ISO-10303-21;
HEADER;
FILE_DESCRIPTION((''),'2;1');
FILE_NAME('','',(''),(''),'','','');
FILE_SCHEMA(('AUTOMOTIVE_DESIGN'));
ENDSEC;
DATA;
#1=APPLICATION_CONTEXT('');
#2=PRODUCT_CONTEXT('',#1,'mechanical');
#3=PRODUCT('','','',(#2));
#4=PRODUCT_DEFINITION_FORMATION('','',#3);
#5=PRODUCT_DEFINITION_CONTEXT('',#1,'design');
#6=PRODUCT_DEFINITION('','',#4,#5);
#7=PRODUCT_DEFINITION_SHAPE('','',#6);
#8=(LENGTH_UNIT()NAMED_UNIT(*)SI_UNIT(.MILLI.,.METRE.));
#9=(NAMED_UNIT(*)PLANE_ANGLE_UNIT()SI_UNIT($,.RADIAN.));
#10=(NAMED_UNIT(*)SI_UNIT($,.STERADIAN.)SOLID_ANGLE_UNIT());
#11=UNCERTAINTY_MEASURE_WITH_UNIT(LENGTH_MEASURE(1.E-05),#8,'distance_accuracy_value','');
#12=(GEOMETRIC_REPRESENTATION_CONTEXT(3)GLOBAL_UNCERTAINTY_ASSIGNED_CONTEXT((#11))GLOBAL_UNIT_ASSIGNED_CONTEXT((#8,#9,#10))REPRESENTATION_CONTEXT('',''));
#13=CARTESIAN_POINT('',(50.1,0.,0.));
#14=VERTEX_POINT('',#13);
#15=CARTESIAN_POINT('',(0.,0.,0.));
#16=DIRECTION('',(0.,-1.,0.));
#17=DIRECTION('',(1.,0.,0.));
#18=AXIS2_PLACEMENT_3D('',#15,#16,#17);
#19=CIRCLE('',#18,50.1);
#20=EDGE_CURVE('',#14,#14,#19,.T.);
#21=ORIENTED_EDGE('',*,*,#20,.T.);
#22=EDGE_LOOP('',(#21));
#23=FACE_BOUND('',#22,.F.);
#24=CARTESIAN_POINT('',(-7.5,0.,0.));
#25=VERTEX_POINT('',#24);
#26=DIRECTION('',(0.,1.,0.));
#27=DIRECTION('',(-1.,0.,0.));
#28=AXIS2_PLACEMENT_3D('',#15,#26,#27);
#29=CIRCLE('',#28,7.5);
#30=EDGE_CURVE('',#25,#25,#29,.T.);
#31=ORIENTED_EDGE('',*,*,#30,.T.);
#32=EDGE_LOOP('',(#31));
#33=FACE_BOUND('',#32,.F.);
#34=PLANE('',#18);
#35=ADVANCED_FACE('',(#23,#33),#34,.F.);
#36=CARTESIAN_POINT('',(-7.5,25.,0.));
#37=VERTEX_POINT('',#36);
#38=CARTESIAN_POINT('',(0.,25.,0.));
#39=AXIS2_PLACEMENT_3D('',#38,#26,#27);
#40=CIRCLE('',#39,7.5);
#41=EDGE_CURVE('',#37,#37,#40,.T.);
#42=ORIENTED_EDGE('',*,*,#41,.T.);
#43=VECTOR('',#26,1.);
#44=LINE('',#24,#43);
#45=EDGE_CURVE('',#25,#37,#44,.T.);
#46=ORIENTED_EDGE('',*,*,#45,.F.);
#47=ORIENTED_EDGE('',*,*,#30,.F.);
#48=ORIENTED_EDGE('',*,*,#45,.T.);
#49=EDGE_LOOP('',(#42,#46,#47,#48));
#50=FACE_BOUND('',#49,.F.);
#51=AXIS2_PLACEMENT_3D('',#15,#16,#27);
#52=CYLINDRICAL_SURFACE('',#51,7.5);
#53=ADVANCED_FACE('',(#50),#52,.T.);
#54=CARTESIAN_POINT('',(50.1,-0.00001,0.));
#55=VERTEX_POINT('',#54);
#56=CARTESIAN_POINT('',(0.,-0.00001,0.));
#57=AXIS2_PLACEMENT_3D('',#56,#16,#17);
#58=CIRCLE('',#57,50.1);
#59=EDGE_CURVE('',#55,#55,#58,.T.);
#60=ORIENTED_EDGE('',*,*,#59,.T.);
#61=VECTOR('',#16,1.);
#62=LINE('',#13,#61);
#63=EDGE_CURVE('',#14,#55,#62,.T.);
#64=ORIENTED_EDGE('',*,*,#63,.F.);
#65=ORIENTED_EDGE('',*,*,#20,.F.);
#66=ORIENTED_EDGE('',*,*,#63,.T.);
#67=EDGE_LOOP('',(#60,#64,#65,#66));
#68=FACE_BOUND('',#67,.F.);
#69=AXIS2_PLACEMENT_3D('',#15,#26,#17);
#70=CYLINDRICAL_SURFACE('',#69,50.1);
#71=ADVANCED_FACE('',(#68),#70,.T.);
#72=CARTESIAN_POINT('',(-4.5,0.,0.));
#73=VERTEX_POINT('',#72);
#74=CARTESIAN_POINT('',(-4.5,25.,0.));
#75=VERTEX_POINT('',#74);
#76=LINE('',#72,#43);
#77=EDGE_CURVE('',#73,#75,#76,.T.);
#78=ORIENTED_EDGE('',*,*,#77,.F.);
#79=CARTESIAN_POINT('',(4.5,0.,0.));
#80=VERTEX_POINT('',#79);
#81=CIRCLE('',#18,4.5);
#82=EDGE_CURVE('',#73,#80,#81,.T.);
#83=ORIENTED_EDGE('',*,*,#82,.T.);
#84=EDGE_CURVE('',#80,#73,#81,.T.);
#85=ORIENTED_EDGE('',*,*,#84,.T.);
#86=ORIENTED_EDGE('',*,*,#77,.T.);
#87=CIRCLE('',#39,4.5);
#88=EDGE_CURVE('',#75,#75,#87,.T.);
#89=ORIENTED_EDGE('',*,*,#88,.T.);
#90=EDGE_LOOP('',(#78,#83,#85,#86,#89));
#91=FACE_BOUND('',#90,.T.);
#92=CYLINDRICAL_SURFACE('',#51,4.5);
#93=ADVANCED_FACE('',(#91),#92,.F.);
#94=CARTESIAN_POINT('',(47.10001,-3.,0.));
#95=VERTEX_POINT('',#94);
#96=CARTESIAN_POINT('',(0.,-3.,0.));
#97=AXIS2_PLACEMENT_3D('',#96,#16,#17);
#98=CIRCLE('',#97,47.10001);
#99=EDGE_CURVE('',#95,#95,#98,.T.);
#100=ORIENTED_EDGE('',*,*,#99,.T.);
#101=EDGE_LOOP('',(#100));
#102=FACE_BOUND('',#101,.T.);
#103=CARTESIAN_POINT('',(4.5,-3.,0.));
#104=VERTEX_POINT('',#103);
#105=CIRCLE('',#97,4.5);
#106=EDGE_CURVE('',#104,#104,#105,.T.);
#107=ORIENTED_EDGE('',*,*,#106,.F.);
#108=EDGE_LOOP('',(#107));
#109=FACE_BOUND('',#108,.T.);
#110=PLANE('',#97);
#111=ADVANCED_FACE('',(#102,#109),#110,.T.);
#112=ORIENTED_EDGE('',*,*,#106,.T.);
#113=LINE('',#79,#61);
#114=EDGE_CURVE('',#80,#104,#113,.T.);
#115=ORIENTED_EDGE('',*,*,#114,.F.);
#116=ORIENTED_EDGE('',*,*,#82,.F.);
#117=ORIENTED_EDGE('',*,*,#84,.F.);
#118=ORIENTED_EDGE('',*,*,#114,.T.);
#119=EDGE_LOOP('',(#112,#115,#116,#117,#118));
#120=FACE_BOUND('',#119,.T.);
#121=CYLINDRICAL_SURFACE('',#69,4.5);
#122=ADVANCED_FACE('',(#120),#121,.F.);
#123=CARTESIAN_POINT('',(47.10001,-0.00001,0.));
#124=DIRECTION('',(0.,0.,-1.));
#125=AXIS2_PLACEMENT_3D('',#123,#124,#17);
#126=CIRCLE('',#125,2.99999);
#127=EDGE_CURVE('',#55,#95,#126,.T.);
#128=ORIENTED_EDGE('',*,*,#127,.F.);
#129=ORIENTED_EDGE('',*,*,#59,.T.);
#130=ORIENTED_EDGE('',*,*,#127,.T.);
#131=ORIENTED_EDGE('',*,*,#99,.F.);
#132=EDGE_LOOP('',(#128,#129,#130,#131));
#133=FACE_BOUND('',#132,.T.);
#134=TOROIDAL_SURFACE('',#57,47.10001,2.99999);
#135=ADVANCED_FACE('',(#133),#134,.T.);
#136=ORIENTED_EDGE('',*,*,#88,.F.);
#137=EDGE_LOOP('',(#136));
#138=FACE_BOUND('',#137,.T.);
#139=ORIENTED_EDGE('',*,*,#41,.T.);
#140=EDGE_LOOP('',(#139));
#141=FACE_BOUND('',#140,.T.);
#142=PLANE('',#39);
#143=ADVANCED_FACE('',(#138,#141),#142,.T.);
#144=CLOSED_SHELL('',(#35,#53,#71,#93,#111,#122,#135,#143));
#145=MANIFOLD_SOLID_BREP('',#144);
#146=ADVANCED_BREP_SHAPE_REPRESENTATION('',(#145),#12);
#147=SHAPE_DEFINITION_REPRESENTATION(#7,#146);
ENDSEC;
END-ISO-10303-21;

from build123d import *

# Parameters (mm, degrees)
F0_R     = 50.1
F0_R_2   = 4.5
F1_DEPTH = 3
F2_R     = 7.5
F2_R_2   = 4.5
F3_DEPTH = 25
F4_R     = 2.99999


# Not quite as in the source:
# - a fillet or chamfer is up to 0.001 mm smaller than in the source, because OpenCascade refuses the exact size


with BuildPart() as f1:
    # F0 (on Front) → F1 (new body)
    with BuildSketch(Plane.XZ):
        Circle(F0_R)
        Circle(F0_R_2, mode=Mode.SUBTRACT)
    extrude(amount=F1_DEPTH)

    # F2 (on face) → F3 (join)
    with BuildSketch(Plane(origin=(0, 0, 0), x_dir=(-1, 0, 0), z_dir=(0, 1, 0))):
        Circle(F2_R)
        Circle(F2_R_2, mode=Mode.SUBTRACT)
    extrude(amount=F3_DEPTH)

    # F4 (radius 3 in the source; OpenCascade refuses exactly that, so slightly less here)
    f4_edges = [f1.edges().sort_by_distance(p)[0] for p in [
        (-50.1, -3, 0),
    ]]
    fillet(f4_edges, radius=F4_R)


solid = f1.part
